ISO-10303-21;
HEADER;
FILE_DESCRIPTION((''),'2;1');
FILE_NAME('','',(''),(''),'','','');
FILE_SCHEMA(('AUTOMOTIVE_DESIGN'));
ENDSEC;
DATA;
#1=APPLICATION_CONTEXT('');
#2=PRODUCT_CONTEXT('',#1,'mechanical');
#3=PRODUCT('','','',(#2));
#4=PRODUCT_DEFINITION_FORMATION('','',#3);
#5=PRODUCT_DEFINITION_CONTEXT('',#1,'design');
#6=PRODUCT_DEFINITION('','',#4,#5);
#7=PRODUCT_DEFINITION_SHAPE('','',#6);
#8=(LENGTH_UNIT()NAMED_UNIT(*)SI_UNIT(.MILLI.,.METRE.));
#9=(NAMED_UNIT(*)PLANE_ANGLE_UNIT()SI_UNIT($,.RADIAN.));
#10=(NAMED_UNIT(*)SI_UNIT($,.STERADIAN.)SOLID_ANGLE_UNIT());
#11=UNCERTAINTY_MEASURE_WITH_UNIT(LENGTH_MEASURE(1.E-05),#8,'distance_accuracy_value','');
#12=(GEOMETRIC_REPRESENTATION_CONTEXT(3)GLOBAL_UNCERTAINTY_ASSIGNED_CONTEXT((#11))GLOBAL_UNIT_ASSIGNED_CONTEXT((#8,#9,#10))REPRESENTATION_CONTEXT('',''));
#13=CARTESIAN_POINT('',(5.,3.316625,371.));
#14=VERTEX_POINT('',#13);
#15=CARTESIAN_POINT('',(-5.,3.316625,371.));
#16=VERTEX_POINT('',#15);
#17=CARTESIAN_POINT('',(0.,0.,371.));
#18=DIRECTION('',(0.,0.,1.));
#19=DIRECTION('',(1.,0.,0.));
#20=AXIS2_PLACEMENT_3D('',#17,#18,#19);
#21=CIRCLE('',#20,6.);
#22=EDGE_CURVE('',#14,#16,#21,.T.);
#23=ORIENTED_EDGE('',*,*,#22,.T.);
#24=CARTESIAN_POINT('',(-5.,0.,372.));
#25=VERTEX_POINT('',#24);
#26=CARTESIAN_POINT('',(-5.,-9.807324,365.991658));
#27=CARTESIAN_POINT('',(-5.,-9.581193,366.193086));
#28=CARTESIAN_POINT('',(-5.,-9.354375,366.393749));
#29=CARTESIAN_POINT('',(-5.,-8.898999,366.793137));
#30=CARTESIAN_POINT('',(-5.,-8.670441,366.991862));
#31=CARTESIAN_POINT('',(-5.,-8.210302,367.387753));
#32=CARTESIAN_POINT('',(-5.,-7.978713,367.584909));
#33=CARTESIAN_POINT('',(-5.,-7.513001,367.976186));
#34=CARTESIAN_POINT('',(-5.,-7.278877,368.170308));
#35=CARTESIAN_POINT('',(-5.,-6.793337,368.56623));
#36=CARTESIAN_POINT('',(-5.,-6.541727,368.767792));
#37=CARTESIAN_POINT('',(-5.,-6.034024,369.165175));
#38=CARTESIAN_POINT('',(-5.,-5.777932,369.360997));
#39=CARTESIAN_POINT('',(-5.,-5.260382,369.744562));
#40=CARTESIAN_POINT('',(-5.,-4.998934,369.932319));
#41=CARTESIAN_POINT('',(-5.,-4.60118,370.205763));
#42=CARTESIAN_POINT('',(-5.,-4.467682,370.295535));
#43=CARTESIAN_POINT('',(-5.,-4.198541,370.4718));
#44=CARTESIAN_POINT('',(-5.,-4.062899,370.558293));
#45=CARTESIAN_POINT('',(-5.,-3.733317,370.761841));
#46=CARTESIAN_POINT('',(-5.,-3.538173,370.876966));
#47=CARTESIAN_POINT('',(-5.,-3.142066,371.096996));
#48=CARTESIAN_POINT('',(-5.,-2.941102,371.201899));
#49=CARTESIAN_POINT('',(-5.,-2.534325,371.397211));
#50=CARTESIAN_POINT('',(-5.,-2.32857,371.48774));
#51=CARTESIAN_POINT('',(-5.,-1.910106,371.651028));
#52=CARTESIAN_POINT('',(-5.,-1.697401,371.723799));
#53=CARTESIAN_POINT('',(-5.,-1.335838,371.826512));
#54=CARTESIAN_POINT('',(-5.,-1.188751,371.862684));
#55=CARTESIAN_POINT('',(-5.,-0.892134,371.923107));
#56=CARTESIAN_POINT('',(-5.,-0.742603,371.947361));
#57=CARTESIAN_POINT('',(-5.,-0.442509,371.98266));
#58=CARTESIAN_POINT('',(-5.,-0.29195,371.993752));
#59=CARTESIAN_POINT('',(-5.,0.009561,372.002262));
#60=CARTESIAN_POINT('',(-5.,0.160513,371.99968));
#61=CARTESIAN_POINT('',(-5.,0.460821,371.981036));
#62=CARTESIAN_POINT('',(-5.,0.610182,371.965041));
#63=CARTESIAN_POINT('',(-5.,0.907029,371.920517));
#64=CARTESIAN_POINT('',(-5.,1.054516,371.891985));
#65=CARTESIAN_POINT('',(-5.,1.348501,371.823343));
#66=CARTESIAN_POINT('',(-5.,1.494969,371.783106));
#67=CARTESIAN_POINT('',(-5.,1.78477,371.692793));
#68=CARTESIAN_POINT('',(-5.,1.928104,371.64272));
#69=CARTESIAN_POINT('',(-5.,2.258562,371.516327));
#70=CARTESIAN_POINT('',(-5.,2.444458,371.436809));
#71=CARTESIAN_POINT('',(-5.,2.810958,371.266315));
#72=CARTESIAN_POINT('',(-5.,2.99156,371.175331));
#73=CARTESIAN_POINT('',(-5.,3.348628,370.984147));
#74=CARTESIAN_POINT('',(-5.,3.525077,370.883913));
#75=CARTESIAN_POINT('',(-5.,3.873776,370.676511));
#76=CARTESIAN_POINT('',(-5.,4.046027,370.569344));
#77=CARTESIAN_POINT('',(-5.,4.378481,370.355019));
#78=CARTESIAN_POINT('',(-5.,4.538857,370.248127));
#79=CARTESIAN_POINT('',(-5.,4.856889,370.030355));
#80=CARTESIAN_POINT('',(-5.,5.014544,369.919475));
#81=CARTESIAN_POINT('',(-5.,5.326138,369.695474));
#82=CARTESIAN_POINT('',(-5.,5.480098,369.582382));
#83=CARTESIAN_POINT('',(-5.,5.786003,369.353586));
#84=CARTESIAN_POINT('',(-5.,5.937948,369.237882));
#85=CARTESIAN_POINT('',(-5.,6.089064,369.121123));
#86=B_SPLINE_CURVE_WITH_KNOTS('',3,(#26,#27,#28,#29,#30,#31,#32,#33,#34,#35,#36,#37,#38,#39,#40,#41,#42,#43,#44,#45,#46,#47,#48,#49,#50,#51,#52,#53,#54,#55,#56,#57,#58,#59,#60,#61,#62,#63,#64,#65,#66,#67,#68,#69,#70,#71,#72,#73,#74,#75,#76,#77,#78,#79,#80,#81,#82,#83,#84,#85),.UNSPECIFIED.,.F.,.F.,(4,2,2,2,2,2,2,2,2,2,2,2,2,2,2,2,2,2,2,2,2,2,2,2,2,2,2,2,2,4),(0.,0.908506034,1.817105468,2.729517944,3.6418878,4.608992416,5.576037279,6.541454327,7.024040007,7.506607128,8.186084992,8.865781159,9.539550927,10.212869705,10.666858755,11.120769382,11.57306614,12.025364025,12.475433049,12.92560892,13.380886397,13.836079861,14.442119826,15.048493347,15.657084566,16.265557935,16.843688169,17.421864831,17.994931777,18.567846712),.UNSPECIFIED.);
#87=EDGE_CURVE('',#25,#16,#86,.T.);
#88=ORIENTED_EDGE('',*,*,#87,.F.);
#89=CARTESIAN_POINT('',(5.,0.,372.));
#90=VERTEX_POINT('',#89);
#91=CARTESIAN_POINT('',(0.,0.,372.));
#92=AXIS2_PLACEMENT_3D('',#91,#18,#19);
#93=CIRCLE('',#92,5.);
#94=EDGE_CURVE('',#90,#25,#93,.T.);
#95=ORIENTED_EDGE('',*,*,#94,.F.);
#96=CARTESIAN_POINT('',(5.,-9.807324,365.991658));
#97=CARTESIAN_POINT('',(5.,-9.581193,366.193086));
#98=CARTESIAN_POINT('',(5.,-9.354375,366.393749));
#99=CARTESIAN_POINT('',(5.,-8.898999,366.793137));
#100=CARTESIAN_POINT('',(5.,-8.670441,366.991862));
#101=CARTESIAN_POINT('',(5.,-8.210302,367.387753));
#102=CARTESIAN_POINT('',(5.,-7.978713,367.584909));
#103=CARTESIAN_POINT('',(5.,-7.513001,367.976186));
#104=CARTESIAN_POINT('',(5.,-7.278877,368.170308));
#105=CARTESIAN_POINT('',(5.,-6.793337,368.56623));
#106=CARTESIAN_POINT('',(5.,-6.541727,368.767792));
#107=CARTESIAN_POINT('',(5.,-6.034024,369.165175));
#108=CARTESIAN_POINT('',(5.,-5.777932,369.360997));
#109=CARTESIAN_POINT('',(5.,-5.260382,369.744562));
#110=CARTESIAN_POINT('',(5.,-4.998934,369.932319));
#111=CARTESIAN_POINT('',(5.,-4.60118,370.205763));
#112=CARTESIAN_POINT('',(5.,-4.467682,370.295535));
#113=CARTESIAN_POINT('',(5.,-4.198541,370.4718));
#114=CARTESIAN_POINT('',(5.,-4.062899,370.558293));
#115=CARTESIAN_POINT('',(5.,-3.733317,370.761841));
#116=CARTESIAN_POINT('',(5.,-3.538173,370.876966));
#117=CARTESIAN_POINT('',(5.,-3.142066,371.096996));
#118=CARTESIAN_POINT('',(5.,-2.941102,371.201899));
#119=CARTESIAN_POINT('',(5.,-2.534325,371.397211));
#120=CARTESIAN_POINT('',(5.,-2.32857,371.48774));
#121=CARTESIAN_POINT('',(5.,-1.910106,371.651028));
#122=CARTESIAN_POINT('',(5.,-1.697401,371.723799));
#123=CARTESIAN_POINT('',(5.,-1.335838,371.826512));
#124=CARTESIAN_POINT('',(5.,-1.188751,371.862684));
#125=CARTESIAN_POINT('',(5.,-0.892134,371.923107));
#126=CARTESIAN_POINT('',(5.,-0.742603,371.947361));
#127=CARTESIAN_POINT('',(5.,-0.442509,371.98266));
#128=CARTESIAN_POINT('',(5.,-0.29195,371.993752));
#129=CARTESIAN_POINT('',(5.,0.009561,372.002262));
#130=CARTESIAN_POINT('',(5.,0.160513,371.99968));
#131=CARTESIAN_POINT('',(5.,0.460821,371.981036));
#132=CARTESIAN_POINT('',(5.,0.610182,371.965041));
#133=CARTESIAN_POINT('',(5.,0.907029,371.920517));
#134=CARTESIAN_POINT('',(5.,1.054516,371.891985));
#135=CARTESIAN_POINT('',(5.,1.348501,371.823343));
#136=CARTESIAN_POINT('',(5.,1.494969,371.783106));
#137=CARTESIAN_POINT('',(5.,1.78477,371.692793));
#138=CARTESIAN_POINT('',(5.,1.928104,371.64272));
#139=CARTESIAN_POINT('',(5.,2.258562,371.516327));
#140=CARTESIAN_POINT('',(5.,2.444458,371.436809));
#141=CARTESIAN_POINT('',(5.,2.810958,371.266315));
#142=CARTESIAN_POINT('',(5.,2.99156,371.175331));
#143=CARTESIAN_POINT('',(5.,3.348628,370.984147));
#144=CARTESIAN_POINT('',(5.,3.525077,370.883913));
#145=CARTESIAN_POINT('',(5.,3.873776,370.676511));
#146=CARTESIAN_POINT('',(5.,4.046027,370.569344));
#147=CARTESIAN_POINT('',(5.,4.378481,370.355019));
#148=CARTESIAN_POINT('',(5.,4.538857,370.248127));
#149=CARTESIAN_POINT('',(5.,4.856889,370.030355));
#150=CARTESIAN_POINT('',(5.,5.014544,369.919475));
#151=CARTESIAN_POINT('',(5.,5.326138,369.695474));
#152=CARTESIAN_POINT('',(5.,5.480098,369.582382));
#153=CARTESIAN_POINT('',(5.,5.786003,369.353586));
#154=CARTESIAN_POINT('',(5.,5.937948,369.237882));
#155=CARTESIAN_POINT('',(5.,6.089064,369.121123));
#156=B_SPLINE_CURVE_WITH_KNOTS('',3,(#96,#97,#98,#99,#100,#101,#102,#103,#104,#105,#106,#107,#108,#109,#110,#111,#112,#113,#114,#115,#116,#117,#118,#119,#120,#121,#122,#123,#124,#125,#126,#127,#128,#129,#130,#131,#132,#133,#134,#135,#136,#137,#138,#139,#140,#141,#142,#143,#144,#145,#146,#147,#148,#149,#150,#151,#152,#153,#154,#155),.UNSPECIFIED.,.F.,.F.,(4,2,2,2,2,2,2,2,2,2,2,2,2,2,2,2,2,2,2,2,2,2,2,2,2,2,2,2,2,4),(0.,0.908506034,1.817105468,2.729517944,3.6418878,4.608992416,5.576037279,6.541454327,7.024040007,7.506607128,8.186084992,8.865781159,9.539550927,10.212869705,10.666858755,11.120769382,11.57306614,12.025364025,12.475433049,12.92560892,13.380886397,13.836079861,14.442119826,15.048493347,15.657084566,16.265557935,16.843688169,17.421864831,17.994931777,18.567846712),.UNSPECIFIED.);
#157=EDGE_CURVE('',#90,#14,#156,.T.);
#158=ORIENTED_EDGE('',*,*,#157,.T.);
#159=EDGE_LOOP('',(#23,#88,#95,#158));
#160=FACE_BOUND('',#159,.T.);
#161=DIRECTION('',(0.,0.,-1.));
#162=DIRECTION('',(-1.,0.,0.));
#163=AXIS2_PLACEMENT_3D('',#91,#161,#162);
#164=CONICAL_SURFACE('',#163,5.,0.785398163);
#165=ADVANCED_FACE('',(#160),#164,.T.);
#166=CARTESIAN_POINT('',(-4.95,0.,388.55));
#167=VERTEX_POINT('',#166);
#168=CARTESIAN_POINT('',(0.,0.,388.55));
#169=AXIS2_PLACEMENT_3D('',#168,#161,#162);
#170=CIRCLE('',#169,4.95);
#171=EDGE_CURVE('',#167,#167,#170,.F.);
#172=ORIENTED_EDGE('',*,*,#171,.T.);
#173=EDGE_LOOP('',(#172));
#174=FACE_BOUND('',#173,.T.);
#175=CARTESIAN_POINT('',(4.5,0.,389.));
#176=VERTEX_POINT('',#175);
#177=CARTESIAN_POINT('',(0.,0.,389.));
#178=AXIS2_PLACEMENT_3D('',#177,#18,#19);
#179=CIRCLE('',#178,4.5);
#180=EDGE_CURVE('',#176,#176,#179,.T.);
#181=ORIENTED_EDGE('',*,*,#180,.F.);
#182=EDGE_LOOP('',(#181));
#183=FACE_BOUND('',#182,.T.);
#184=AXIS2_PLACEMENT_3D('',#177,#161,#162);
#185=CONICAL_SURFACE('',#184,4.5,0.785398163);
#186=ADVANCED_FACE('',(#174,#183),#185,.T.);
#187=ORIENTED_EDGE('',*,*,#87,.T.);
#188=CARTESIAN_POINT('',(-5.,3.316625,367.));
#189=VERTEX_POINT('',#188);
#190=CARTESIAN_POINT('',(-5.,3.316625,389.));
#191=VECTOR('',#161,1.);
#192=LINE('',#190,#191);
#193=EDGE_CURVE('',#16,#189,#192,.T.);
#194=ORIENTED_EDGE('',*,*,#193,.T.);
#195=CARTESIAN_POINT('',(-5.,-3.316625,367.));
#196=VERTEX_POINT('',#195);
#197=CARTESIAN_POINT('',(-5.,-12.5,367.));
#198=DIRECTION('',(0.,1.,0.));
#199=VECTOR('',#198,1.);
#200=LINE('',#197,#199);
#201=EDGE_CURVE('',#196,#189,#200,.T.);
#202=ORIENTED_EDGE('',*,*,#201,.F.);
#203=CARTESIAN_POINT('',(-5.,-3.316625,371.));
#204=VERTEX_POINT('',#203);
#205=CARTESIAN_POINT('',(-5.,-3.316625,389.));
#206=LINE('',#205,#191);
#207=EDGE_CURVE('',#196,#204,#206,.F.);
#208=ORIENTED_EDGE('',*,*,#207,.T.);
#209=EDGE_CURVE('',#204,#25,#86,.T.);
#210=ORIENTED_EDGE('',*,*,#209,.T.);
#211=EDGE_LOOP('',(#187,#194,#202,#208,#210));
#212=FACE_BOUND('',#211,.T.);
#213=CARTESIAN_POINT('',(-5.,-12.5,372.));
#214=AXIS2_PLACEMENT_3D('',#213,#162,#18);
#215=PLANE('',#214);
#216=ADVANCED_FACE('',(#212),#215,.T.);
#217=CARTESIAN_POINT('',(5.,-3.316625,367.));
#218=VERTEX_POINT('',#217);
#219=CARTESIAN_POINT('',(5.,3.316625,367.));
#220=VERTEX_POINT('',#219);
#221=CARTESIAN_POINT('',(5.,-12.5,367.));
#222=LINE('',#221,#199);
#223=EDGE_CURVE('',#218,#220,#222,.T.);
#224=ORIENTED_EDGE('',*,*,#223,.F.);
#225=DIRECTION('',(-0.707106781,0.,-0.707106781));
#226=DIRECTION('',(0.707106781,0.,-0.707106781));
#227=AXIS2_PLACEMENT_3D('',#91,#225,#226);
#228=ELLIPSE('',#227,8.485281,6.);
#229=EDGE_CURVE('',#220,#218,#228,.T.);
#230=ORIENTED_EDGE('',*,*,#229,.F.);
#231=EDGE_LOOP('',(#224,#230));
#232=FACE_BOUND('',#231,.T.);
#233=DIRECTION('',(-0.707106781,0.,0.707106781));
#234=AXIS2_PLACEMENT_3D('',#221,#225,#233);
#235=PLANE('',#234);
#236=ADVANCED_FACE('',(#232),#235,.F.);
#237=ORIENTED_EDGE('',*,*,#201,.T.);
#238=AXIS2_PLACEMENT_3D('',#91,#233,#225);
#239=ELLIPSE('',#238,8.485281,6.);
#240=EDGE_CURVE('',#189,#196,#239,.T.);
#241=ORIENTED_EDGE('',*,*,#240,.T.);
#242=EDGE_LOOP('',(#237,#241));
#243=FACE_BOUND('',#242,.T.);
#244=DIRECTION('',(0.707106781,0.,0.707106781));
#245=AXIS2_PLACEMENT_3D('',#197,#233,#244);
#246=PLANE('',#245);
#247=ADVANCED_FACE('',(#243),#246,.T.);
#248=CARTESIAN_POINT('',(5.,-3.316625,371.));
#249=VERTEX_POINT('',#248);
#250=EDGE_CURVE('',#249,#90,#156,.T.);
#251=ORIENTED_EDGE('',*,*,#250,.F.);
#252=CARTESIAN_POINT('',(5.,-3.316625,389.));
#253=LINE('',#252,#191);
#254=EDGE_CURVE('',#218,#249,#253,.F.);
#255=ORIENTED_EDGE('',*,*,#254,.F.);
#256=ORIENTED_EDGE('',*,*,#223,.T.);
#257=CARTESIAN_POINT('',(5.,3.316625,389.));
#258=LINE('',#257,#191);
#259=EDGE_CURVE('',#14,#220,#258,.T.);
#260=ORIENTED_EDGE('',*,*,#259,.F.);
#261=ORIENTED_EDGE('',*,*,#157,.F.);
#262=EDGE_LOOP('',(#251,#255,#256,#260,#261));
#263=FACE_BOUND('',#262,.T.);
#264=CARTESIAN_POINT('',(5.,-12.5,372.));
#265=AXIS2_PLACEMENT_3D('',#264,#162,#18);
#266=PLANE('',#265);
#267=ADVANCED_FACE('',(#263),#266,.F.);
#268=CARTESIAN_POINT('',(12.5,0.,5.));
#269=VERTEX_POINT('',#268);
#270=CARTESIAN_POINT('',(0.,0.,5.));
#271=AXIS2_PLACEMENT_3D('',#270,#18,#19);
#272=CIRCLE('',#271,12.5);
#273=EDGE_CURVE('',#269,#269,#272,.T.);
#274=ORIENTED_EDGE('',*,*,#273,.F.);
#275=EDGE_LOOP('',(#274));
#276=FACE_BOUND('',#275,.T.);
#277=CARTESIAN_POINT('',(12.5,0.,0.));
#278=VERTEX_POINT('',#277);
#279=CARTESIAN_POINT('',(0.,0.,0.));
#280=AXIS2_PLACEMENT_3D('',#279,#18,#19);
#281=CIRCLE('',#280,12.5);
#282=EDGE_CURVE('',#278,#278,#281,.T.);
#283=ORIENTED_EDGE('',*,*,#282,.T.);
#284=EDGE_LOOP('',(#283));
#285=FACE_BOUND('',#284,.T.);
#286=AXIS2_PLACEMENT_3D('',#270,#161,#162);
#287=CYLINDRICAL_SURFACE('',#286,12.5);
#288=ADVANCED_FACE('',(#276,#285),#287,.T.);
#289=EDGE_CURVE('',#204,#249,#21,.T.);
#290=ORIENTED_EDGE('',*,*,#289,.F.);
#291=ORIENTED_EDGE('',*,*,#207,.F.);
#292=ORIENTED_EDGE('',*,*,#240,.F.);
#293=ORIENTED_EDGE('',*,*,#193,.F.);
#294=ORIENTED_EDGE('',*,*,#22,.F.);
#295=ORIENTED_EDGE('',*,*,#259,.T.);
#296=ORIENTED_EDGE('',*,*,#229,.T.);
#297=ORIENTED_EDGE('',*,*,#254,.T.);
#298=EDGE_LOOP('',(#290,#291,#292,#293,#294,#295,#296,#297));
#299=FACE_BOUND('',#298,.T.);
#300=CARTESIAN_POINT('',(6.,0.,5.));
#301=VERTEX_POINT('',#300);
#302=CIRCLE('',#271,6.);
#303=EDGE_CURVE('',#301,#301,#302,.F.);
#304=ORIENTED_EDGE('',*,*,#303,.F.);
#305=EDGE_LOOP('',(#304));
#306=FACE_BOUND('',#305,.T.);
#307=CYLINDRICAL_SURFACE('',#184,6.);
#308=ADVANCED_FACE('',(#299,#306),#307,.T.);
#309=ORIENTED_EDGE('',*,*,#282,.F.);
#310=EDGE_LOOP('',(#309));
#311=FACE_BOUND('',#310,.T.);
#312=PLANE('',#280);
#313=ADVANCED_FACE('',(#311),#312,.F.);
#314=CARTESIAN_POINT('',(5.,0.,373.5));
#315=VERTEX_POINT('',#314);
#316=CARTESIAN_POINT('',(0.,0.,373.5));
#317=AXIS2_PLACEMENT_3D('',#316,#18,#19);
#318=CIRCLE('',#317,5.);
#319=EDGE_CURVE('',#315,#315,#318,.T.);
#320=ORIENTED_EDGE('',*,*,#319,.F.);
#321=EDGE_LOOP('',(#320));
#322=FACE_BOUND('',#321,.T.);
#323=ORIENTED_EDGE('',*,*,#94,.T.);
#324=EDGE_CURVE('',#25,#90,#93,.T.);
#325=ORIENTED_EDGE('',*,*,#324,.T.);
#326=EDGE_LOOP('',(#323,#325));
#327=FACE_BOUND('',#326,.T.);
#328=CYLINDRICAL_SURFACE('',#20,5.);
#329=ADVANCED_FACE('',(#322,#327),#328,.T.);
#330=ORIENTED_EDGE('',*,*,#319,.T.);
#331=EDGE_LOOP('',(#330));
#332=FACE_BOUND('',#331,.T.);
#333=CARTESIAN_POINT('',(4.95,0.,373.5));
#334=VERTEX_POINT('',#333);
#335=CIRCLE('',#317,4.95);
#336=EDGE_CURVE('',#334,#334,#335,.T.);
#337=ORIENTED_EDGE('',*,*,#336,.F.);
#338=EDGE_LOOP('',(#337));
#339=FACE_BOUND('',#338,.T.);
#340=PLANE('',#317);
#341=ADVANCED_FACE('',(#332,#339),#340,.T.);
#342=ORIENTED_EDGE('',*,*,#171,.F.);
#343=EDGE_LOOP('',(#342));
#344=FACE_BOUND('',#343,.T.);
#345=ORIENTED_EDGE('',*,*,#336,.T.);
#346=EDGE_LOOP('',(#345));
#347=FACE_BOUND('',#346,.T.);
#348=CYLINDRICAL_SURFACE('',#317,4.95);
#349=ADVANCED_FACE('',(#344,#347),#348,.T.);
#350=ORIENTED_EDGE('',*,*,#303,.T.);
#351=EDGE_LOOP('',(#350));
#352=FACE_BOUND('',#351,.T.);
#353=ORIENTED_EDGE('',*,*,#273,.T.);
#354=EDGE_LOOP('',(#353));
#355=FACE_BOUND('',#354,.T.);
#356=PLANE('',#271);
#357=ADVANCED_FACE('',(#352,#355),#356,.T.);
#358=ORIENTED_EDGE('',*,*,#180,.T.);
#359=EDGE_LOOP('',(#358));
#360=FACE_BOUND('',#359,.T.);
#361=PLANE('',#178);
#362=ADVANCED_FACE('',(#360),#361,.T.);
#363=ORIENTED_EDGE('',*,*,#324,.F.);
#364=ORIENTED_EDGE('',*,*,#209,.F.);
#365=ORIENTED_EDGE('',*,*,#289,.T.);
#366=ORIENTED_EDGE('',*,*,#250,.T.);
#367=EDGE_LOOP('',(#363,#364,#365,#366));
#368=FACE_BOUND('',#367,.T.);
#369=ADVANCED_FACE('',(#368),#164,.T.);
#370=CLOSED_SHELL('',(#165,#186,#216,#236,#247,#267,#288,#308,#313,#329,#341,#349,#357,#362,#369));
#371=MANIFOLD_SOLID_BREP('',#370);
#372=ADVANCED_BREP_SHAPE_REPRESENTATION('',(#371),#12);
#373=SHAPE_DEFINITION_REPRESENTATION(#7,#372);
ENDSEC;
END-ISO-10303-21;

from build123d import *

# Parameters (mm, degrees)
SKETCH1_R           = 12.5
PISTON_DEPTH        = 5
SKETCH2_R           = 6
ROD_DEPTH           = 389
THREADS_START       = -18
SKETCH3_R           = 6
SKETCH3_R_2         = 5
THREADS_DEPTH       = 18
ROD_CHAMFER_SIZE    = 1
WRENCH_FLAT_DEPTH   = 390.401463788
THREAD_CHAMFER_SIZE = 0.5
CUT_EXTRUDE1_START  = -15.5
SKETCH5_R           = 5
SKETCH5_R_2         = 4.95
CUT_EXTRUDE1_DEPTH  = 15.5


with BuildPart() as part:
    # Sketch1 → Piston (new body)
    with BuildSketch(Plane.XY):
        Circle(SKETCH1_R)
    extrude(amount=PISTON_DEPTH)

    # Sketch2 → Rod (add)
    with BuildSketch(Plane.XY):
        Circle(SKETCH2_R)
    extrude(amount=ROD_DEPTH)

    # Sketch3 → Threads (cut)
    with BuildSketch(Plane.XY.offset(389).offset(THREADS_START)):
        Circle(SKETCH3_R)
        Circle(SKETCH3_R_2, mode=Mode.SUBTRACT)
    extrude(amount=THREADS_DEPTH, mode=Mode.SUBTRACT)

    # Rod Chamfer
    rod_chamfer_edges = [part.edges().sort_by_distance(p)[0] for p in [
        (-5, 0, 371),
    ]]
    chamfer(rod_chamfer_edges, length=ROD_CHAMFER_SIZE - 0.0001)  # a hair under: the kernel refuses the full size

    # Sketch4 → Wrench Flat (cut, symmetric)
    with BuildSketch(Plane(origin=(0, 0, 0), x_dir=(1, 0, 0), z_dir=(0, 1, 0))):
        Polygon((5, -372), (5, -367), (6, -366), (6, -372), align=None)
    wrench_flat = extrude(amount=WRENCH_FLAT_DEPTH, both=True, mode=Mode.SUBTRACT)

    # Mirror1: Wrench Flat across plane
    add(wrench_flat.mirror(Plane(origin=(0, 0, 0), x_dir=(0, 0, 1), z_dir=(1, 0, 0))), mode=Mode.SUBTRACT)

    # Thread Chamfer
    thread_chamfer_edges = [part.edges().sort_by_distance(p)[0] for p in [
        (-5, 0, 389),
    ]]
    chamfer(thread_chamfer_edges, length=THREAD_CHAMFER_SIZE)

    # Sketch5 → Cut-Extrude1 (cut)
    with BuildSketch(Plane.XY.offset(389).offset(CUT_EXTRUDE1_START)):
        Circle(SKETCH5_R)
        Circle(SKETCH5_R_2, mode=Mode.SUBTRACT)
    extrude(amount=CUT_EXTRUDE1_DEPTH, mode=Mode.SUBTRACT)


solid = part.part
